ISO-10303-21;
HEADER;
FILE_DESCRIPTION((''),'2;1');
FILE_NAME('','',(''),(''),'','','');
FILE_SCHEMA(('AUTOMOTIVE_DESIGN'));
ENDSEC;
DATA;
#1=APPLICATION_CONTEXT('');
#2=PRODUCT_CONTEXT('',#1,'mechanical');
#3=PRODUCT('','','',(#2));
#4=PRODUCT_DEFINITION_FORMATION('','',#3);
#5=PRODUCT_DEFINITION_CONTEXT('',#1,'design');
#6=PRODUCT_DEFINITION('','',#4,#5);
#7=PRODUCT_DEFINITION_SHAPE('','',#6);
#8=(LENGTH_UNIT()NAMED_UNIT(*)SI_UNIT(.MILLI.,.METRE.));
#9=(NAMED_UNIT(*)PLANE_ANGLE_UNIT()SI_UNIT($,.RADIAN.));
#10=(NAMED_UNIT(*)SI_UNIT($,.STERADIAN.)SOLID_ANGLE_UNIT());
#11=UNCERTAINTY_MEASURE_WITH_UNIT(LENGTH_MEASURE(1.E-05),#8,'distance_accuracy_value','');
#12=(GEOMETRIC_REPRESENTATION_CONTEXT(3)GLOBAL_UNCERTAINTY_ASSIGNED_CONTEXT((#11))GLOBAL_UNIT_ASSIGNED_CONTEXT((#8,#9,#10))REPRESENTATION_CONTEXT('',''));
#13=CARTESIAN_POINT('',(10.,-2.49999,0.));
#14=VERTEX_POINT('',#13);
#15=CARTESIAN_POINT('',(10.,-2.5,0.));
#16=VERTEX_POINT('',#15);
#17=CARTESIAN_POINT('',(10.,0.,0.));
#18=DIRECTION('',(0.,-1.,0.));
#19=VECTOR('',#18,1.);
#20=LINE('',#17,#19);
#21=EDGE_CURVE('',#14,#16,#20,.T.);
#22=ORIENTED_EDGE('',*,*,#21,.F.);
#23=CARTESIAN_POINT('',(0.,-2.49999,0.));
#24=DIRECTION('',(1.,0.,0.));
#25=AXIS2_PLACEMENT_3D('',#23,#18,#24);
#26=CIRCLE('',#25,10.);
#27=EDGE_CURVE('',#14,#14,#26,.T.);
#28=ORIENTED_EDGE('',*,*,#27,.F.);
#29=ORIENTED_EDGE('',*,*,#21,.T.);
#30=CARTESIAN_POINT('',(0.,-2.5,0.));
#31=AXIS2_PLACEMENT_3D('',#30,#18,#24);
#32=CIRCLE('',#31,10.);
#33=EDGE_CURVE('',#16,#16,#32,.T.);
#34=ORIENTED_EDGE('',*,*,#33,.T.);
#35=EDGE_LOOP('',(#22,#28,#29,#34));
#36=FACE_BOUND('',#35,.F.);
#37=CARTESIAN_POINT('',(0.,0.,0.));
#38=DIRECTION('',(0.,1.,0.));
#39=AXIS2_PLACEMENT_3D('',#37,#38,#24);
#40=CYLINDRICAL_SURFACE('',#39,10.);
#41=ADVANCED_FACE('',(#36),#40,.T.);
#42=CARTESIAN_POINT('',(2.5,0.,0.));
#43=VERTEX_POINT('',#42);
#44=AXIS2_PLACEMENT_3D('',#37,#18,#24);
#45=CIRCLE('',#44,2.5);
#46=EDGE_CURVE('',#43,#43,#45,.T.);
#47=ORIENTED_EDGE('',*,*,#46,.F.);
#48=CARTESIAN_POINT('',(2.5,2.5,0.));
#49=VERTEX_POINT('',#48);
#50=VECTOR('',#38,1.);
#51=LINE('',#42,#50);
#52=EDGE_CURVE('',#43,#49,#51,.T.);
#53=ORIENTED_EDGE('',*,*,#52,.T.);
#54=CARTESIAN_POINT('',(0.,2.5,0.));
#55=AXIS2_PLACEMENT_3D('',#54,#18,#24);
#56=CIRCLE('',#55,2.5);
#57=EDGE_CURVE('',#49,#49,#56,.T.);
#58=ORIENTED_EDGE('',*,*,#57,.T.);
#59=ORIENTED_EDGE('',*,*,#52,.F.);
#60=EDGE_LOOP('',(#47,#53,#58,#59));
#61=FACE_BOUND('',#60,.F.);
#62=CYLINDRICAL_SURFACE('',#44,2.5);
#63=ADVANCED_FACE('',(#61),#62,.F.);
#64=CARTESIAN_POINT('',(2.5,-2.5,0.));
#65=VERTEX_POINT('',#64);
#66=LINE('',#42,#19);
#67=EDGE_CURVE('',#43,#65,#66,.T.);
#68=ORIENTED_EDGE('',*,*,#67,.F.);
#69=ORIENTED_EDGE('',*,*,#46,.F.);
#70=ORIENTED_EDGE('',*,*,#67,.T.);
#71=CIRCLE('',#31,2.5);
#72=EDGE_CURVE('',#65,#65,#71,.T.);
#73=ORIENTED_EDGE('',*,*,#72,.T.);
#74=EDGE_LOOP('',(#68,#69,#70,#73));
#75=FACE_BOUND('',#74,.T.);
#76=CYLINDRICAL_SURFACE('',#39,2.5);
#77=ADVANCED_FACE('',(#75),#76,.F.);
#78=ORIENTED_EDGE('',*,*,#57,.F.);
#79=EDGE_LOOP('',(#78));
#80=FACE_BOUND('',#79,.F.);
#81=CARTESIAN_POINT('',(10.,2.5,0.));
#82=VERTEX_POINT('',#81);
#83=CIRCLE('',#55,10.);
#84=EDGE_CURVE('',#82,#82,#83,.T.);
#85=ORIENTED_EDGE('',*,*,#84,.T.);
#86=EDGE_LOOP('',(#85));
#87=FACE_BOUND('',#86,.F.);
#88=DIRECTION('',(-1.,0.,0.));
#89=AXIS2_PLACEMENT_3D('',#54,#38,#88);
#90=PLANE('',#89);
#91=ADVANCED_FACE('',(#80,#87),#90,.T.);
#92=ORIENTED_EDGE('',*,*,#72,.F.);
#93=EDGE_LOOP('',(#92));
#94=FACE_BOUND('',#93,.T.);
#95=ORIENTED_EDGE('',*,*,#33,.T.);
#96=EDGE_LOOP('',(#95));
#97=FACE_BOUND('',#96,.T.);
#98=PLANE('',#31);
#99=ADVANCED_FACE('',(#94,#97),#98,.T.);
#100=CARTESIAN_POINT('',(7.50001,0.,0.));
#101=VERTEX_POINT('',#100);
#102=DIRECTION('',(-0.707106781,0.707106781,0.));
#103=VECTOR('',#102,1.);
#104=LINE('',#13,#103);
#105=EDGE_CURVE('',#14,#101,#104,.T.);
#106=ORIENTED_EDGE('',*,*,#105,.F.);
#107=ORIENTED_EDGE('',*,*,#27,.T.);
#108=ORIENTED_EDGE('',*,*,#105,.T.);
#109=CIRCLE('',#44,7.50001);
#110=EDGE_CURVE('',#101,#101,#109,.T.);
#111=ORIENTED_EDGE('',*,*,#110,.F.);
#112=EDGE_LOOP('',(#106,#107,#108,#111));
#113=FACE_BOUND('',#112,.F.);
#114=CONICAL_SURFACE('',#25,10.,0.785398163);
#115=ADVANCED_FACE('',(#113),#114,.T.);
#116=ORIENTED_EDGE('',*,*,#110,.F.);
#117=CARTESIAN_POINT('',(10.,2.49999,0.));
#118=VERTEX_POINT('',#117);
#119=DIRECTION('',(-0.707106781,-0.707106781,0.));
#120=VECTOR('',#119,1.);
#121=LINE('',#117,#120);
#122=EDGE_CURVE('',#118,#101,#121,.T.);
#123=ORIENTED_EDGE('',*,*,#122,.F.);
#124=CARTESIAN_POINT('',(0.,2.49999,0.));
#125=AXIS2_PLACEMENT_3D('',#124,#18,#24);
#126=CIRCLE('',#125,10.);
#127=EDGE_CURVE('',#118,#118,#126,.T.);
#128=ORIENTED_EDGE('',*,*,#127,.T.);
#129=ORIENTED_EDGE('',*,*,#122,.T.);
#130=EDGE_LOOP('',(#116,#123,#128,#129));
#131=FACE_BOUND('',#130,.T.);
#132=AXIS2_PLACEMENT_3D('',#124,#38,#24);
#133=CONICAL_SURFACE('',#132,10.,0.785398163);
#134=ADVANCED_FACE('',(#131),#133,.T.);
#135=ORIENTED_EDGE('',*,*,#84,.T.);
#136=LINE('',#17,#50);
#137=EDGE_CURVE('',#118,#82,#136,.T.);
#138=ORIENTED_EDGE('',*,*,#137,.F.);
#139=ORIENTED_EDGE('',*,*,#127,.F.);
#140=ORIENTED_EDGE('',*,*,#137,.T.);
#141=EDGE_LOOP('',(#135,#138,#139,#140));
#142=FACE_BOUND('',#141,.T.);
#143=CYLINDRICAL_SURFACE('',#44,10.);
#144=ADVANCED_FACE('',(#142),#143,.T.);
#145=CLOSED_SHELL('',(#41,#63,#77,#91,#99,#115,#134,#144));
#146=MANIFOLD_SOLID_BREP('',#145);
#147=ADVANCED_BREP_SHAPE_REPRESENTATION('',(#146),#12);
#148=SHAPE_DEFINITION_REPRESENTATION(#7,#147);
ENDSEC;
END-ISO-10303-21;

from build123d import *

# Parameters (mm, degrees)
F0_R     = 10
F0_R_2   = 2.5
F1_DEPTH = 2.5
F2_SIZE  = 2.49999


# Not quite as in the source:
# - a fillet or chamfer is up to 0.001 mm smaller than in the source, because OpenCascade refuses the exact size


with BuildPart() as f1:
    # F0 (on Front) → F1 (new body)
    with BuildSketch(Plane.XZ):
        Circle(F0_R)
        Circle(F0_R_2, mode=Mode.SUBTRACT)
    extrude(amount=F1_DEPTH)

    # F2 (size 2.5 in the source; OpenCascade refuses exactly that, so slightly less here)
    f2_edges = [f1.edges().sort_by_distance(p)[0] for p in [
        (-10, 0, 0),
    ]]
    chamfer(f2_edges, length=F2_SIZE)

    # F3: F1 across plane


with BuildPart() as f1_1:
    add(f1.part)
    add(f1.part.mirror(Plane.XZ))


solid = f1_1.part
